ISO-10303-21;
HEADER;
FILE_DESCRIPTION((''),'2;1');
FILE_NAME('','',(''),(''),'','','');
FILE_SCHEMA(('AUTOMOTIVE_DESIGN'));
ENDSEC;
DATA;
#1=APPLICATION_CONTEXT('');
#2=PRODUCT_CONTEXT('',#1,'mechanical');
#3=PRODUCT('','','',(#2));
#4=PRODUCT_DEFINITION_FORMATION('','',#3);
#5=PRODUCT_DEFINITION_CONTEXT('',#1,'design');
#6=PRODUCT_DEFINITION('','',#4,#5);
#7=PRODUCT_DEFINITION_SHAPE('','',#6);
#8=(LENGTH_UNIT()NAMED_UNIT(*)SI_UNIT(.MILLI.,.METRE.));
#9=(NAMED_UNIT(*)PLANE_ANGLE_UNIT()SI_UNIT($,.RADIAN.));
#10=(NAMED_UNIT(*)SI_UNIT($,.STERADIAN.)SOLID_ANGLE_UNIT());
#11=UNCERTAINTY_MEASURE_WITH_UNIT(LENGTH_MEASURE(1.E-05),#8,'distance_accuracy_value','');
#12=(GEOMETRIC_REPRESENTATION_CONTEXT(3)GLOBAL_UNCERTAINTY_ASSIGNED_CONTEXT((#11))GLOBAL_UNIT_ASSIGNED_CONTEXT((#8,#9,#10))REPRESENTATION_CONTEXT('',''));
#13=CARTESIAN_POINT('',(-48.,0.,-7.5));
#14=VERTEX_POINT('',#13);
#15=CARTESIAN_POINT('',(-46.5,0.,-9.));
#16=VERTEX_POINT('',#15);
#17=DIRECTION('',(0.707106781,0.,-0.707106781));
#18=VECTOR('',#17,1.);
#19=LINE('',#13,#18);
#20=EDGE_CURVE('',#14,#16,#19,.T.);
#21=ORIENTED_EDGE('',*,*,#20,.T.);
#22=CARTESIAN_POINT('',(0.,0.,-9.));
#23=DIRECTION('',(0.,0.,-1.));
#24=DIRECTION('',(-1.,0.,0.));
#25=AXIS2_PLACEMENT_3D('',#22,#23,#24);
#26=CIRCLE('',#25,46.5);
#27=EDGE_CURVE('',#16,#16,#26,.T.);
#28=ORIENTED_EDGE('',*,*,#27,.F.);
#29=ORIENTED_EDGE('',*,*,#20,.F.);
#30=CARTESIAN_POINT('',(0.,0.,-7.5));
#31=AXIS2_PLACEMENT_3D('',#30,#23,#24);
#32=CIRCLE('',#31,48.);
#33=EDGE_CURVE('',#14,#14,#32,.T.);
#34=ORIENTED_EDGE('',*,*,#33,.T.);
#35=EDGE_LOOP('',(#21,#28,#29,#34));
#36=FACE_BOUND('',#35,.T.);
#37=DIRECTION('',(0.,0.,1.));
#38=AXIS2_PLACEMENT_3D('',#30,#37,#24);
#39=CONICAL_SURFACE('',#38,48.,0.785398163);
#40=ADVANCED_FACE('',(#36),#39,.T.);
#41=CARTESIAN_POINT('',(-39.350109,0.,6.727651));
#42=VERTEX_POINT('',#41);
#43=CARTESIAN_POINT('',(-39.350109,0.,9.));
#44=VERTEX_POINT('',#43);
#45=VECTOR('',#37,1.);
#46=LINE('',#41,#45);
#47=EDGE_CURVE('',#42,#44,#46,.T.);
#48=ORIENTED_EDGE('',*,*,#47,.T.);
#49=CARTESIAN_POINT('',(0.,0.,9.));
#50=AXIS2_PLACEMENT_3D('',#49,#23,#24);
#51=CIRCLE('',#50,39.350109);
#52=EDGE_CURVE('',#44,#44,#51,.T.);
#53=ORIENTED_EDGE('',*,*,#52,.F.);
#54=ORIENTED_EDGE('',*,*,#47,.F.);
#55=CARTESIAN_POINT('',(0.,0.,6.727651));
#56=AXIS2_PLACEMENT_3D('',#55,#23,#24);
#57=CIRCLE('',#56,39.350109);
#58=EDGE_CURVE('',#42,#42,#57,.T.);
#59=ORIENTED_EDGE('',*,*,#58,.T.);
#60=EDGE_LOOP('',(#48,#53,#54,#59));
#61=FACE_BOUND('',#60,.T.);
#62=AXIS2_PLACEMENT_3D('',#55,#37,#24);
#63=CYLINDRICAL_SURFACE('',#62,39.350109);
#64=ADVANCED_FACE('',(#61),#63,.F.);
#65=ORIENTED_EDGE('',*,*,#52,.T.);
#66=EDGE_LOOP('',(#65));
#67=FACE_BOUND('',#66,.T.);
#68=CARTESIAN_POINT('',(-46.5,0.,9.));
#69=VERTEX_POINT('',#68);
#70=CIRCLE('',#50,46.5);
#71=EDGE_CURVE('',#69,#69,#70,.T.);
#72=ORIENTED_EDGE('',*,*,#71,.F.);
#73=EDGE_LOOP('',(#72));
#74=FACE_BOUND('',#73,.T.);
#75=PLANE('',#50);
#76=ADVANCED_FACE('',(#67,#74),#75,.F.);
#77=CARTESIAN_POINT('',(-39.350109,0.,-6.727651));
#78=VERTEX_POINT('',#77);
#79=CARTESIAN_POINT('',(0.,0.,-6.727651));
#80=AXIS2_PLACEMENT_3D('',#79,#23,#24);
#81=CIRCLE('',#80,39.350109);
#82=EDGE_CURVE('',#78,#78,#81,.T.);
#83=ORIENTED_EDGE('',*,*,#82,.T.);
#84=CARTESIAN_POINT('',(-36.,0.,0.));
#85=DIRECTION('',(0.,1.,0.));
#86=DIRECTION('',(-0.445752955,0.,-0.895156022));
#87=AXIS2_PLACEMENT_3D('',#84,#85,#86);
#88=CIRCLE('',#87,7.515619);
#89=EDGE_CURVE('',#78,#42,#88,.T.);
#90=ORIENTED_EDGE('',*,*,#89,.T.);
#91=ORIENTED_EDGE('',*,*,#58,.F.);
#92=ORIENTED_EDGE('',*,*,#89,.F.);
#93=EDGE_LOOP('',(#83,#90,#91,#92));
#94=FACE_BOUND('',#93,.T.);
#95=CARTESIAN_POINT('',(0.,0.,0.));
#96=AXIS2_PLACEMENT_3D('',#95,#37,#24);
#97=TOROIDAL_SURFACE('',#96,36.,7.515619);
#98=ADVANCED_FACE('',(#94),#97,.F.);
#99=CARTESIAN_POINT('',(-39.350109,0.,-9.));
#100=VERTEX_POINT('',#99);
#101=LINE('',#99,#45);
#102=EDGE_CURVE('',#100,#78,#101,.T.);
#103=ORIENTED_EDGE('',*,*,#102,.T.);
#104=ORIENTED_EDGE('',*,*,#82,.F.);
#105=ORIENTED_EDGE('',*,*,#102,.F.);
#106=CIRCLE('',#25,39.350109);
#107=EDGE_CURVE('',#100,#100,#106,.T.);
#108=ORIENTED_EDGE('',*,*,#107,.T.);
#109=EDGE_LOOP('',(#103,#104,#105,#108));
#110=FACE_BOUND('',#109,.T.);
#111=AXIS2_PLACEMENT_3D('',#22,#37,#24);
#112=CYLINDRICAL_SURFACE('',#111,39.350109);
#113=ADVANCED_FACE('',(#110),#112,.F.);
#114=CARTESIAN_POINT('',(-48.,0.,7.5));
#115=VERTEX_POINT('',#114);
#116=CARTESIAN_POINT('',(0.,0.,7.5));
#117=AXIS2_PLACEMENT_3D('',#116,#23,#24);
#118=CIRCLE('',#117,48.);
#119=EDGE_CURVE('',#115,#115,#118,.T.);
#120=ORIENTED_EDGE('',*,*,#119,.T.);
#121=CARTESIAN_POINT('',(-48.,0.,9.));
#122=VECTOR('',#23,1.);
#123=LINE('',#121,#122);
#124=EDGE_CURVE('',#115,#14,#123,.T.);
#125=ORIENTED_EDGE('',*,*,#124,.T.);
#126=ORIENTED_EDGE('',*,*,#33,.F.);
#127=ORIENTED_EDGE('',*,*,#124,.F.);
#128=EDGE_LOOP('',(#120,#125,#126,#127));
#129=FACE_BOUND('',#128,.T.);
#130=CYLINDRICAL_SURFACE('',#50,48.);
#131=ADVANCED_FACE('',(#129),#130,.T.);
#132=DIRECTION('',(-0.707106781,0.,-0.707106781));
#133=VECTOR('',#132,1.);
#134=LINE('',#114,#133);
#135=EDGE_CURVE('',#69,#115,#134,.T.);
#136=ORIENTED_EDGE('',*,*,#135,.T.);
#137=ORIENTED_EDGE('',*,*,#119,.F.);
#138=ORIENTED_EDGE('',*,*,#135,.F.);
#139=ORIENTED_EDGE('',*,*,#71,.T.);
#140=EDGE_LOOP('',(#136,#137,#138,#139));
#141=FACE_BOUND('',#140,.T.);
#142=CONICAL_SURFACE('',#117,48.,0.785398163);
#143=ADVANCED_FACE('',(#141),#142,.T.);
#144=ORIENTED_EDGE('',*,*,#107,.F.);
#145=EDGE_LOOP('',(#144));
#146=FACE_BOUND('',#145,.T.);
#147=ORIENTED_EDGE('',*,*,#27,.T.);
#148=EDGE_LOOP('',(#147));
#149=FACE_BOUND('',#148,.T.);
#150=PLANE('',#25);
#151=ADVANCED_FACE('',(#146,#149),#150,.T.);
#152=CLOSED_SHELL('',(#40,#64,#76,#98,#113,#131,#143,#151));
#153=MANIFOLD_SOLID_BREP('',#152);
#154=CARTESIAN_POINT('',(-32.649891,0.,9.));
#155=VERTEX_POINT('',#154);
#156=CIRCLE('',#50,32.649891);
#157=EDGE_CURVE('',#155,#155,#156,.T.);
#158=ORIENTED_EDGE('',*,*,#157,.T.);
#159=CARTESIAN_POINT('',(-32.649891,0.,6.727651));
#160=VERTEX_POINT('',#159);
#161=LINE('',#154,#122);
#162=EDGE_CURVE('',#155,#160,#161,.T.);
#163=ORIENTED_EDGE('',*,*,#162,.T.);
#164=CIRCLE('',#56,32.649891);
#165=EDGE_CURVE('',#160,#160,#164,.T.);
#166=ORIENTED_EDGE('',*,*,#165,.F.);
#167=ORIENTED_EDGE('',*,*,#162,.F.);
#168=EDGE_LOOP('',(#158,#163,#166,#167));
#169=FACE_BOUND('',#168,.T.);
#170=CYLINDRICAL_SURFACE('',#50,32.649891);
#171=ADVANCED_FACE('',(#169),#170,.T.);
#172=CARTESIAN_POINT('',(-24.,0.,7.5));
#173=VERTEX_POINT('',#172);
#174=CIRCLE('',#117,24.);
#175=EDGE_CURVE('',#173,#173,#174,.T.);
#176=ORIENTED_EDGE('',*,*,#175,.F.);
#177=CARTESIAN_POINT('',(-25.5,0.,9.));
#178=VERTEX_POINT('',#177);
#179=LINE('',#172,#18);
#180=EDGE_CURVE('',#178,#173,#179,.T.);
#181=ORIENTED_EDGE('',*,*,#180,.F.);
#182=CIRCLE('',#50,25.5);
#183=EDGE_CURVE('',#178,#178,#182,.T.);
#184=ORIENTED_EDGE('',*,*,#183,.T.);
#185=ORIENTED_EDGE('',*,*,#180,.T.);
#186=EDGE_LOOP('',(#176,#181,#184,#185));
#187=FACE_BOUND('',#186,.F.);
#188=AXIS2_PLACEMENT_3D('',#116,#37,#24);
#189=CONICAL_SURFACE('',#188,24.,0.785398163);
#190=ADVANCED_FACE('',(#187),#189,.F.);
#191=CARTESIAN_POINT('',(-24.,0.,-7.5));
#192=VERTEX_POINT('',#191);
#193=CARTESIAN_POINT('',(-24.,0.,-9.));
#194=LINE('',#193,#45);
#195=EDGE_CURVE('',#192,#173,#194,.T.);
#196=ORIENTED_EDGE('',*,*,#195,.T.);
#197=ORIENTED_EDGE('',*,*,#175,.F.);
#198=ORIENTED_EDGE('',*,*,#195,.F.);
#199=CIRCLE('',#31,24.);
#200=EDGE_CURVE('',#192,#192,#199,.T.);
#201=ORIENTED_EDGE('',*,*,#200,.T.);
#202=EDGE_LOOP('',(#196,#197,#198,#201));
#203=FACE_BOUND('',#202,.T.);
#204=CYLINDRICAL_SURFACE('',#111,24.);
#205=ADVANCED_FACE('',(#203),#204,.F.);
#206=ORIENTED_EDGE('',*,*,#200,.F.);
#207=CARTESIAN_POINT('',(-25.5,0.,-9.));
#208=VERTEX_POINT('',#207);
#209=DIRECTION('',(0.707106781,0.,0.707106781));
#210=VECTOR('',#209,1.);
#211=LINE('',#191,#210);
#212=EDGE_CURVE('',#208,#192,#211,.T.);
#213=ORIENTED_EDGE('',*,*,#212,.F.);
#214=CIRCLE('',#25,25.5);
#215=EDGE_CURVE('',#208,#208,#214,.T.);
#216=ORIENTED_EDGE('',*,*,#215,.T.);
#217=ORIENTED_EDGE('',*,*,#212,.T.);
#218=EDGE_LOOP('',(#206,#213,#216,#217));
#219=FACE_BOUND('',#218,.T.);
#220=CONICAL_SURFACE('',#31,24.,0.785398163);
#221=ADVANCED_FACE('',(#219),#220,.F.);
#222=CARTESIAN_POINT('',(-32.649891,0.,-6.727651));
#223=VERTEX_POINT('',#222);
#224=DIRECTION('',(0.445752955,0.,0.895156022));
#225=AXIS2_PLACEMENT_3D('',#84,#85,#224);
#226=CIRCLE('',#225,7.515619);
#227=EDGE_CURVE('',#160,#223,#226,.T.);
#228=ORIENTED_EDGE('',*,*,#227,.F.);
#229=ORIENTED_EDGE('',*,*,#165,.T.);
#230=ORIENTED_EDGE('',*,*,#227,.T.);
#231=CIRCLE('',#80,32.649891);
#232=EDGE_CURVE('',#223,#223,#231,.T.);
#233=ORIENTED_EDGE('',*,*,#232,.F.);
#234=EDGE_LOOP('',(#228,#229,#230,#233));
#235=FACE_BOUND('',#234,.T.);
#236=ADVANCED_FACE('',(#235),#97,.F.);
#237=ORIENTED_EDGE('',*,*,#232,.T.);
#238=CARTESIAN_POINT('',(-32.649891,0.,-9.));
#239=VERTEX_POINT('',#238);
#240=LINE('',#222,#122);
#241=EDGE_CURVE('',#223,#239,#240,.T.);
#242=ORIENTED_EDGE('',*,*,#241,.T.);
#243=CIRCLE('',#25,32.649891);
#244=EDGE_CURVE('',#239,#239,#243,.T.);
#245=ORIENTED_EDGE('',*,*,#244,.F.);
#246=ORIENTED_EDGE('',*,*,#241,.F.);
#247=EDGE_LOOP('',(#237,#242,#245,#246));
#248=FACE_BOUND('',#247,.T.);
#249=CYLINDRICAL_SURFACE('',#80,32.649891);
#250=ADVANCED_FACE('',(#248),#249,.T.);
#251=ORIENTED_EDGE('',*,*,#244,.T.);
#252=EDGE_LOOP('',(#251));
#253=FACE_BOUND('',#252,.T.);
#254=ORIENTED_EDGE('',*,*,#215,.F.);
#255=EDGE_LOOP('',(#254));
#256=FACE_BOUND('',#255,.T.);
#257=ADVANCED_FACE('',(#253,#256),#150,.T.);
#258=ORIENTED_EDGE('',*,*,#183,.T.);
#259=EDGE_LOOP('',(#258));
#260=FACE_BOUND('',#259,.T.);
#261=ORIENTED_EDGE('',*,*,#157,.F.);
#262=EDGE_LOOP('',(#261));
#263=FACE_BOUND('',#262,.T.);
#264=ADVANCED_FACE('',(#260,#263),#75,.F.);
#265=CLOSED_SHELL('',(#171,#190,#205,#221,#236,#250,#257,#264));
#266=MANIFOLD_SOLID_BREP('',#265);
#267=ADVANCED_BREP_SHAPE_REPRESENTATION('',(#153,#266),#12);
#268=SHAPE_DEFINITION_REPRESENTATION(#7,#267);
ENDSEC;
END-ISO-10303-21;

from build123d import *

# Parameters (mm, degrees)
F2_SIZE   = 1.5
F2_2_SIZE = 1.5


# Not quite as in the source:
# - a feature of the source that left no trace in its solid (it failed there, or was rolled back) is left out
# - the program builds the solid bodies; features that only make, move or delete a surface that nothing else refers to are left out


with BuildPart() as f1:
    # F0 (on Front) → F1 (revolve)
    with BuildSketch(Plane.XZ):
        with BuildLine():
            ThreePointArc((-39.3501091827, -6.7276512101), (-43.5156185601, 0), (-39.3501091827, 6.7276512101))
            Line((-39.3501091827, 6.7276512101), (-39.3501091827, 9))
            Line((-39.3501091827, 9), (-48, 9))
            Line((-48, 9), (-48, -9))
            Line((-48, -9), (-39.3501091827, -9))
            Line((-39.3501091827, -9), (-39.3501091827, -6.7276512101))
        make_face()
    revolve(axis=Axis((0, 0, -2.1557251625), (0, 0, -1)))

    # F2
    f2_edges = [f1.edges().sort_by_distance(p)[0] for p in [
        (48, 0, 9),
        (48, 0, -9),
    ]]
    chamfer(f2_edges, length=F2_SIZE)


with BuildPart() as f1b:
    # F0 (on Front) → F1, piece 2 (revolve)
    with BuildSketch(Plane.XZ):
        with BuildLine():
            Line((-24, 9), (-32.6498908173, 9))
            Line((-32.6498908173, 9), (-32.6498908173, 6.7276512101))
            ThreePointArc((-32.6498908173, 6.7276512101), (-28.4843814399, 0), (-32.6498908173, -6.7276512101))
            Line((-32.6498908173, -6.7276512101), (-32.6498908173, -9))
            Line((-32.6498908173, -9), (-24, -9))
            Line((-24, -9), (-24, 9))
        make_face()
    revolve(axis=Axis((0, 0, -2.1557251625), (0, 0, -1)))

    # F2#2
    f2_2_edges = [f1b.edges().sort_by_distance(p)[0] for p in [
        (24, 0, 9),
        (24, 0, -9),
    ]]
    chamfer(f2_2_edges, length=F2_2_SIZE)


solid = Compound([f1.part, f1b.part])
